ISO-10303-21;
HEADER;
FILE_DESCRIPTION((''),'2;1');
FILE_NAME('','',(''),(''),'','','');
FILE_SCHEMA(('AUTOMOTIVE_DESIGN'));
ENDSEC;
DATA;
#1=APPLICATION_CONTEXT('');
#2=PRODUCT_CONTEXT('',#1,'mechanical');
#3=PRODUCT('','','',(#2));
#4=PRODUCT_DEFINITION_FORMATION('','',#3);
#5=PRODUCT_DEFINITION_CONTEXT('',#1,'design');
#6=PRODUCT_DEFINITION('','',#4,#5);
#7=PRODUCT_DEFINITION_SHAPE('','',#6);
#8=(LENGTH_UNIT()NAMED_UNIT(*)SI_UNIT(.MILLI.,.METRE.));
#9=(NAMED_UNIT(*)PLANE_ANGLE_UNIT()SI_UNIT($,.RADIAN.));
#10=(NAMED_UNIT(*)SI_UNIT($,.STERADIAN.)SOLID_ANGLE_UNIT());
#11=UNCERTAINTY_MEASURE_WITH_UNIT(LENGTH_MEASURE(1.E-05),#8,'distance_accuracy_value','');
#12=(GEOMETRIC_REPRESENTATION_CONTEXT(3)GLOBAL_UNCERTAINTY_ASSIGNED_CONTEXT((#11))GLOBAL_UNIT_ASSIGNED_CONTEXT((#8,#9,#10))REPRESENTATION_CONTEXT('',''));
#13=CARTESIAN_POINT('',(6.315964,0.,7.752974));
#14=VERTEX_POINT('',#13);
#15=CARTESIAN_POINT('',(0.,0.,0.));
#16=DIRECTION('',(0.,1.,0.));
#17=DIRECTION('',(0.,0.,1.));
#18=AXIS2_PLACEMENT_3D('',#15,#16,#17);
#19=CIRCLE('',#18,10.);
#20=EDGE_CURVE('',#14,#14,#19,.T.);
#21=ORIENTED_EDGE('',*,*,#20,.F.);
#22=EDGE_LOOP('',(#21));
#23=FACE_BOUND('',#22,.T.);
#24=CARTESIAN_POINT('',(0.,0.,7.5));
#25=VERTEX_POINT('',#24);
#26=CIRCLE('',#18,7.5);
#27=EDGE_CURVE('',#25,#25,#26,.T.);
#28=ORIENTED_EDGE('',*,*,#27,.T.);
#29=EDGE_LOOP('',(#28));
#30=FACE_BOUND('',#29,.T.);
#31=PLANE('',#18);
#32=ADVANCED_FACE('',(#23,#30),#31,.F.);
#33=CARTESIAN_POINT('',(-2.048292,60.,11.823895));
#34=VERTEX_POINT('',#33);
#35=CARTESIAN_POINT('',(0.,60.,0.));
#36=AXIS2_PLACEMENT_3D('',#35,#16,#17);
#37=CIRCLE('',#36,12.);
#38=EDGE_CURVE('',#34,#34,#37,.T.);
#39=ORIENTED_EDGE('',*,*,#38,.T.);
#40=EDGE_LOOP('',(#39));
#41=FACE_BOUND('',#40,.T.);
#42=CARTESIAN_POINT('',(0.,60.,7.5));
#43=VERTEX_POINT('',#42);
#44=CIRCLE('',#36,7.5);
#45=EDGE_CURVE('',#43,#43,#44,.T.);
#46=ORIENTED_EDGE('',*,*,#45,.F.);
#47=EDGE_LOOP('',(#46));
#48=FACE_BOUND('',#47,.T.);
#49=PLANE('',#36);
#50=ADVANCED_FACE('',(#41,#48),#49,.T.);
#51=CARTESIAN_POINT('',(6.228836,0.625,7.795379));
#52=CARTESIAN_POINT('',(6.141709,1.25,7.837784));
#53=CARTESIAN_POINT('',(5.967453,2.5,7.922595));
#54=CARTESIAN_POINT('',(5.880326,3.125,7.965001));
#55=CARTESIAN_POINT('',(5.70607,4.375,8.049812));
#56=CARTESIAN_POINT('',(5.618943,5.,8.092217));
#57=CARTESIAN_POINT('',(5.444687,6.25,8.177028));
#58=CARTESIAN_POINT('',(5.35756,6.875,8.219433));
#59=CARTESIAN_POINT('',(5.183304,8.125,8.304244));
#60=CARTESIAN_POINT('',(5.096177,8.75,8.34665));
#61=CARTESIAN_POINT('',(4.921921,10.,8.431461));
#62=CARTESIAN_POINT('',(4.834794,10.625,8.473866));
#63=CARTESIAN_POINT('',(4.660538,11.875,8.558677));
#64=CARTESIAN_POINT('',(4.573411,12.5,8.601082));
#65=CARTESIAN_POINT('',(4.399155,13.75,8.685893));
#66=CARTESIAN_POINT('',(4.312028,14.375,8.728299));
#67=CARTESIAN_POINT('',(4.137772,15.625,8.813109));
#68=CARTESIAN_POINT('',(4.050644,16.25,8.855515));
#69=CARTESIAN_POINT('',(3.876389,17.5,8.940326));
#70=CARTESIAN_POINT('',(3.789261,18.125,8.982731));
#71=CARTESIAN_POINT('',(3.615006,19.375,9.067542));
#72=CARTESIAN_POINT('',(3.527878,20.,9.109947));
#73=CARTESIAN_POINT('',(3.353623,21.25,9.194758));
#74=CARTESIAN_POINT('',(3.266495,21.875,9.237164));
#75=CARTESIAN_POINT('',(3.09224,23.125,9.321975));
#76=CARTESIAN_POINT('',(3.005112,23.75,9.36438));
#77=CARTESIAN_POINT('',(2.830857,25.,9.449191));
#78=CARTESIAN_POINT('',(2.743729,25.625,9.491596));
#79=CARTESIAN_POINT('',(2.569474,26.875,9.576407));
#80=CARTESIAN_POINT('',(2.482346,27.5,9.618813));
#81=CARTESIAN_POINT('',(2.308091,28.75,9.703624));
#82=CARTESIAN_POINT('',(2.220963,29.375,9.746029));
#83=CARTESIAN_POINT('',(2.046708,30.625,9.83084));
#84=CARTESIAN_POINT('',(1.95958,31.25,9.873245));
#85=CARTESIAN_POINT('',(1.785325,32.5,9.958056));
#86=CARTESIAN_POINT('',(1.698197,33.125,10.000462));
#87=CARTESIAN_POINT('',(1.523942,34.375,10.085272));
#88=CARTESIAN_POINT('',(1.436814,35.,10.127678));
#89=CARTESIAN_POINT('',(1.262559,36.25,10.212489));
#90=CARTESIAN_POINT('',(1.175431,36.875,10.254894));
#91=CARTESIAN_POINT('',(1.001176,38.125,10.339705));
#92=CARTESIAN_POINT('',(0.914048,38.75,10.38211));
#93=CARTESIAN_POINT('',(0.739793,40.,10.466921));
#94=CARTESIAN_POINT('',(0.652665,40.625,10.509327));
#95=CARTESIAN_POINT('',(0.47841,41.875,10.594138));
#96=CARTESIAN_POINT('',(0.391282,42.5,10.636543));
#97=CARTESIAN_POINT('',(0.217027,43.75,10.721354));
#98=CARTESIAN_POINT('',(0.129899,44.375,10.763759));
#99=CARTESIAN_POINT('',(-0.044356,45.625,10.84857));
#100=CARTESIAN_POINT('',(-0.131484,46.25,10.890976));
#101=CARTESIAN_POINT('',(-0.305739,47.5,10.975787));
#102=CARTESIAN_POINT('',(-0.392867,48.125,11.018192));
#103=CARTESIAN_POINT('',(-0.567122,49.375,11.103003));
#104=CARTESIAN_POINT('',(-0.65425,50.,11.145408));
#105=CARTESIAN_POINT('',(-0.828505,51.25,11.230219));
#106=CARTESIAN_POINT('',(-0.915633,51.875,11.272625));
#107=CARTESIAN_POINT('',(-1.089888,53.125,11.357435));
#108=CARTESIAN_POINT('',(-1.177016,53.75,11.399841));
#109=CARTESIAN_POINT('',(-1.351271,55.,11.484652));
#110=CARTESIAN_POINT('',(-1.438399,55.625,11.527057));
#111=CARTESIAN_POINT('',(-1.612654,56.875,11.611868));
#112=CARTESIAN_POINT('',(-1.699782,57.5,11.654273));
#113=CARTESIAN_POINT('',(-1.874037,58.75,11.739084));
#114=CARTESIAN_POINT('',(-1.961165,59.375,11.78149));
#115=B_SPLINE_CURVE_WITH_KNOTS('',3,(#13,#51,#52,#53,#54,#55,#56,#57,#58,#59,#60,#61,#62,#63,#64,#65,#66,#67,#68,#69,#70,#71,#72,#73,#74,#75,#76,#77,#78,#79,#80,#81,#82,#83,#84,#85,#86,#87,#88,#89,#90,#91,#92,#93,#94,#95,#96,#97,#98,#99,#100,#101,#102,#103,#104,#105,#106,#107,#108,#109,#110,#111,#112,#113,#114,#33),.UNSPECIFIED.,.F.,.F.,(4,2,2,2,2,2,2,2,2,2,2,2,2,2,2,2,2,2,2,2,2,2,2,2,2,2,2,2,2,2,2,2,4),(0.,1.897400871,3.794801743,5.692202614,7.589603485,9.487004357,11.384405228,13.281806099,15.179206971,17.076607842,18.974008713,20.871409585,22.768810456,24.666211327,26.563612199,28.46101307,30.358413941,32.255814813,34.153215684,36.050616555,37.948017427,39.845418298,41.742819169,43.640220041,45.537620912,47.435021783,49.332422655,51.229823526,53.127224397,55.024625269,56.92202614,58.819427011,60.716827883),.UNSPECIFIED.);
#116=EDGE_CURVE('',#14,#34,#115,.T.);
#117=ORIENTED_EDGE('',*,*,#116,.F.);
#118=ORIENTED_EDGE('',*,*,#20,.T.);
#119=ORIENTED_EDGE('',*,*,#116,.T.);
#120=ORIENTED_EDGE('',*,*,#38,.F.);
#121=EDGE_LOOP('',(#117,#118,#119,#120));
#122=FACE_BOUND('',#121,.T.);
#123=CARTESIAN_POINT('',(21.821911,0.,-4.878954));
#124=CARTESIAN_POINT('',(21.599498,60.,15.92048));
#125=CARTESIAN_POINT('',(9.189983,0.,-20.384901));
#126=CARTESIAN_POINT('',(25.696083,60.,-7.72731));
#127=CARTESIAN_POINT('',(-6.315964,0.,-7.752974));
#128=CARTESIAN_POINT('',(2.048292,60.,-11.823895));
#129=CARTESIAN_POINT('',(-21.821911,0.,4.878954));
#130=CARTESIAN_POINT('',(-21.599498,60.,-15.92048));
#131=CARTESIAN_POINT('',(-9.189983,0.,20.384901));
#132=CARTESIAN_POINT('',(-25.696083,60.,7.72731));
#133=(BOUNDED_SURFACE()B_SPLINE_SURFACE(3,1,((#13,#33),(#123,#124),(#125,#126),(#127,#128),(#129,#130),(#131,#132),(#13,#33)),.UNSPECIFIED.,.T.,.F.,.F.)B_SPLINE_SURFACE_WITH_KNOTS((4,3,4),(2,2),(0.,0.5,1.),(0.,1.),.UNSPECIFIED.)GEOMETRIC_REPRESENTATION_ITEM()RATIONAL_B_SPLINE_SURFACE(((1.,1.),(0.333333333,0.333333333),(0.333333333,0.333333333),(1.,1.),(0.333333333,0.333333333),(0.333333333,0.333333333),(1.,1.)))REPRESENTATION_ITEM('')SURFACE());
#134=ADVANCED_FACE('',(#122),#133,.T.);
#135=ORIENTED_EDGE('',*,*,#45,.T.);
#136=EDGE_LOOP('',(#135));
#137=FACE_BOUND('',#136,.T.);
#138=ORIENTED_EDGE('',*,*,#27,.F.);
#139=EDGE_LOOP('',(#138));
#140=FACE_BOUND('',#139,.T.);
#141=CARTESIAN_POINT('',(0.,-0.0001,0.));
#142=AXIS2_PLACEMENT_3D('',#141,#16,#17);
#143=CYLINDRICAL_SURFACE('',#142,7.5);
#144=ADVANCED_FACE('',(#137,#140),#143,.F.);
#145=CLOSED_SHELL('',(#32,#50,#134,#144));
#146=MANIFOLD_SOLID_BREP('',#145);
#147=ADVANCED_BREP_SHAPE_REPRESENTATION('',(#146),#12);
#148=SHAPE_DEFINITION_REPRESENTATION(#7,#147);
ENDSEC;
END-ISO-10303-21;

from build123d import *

# Parameters (mm, degrees)
CUT_EXTRUDE1_DEPTH      = 63.353829207
CUT_EXTRUDE1_DEPTH_BACK = 63.353829207
SKETCH3_R               = 7.5


with BuildPart() as part:
    # Loft1: read off the stored shape, not the designer's step
    # Loft1: loft between two sections, ruled curve by curve
    loft1_from = [
        Edge.make_bspline([(6.315963935, 0, 7.752973596), (21.821911126, 0, -4.878954273), (9.189983257, 0, -20.384901465), (-6.315963935, 0, -7.752973596), (-21.821911126, 0, 4.878954273), (-9.189983257, 0, 20.384901465), (6.315963935, 0, 7.752973596)], [0, 0, 0, 0, 0.5, 0.5, 0.5, 1, 1, 1, 1], 3, [1, 0.333333333, 0.333333333, 1, 0.333333333, 0.333333333, 1]),
    ]
    loft1_to = [
        Edge.make_bspline([(-2.04829248, 60, 11.823895209), (21.599497939, 60, 15.920480168), (25.696082898, 60, -7.72731025), (2.04829248, 60, -11.823895209), (-21.599497939, 60, -15.920480168), (-25.696082898, 60, 7.72731025), (-2.04829248, 60, 11.823895209)], [0, 0, 0, 0, 0.5, 0.5, 0.5, 1, 1, 1, 1], 3, [1, 0.333333333, 0.333333333, 1, 0.333333333, 0.333333333, 1]),
    ]
    loft1 = Solid(Shell([*[Face.make_surface_from_curves(loft1_from[k], loft1_to[k]) for k in range(1)], Face(Wire(loft1_from)), Face(Wire(loft1_to))]))
    add(loft1)

    # Sketch3 → Cut-Extrude1 (cut, two sides: drawn at the far end of the back side and taken through both)
    with BuildSketch(Plane(origin=(0, 60, 0), x_dir=(1, 0, 0), z_dir=(0, 1, 0)).offset(-CUT_EXTRUDE1_DEPTH_BACK)):
        with Locations(Location((0, 0, 0), (0, 0, 270))):
            Circle(SKETCH3_R)
    extrude(amount=CUT_EXTRUDE1_DEPTH + CUT_EXTRUDE1_DEPTH_BACK, mode=Mode.SUBTRACT)


solid = part.part
